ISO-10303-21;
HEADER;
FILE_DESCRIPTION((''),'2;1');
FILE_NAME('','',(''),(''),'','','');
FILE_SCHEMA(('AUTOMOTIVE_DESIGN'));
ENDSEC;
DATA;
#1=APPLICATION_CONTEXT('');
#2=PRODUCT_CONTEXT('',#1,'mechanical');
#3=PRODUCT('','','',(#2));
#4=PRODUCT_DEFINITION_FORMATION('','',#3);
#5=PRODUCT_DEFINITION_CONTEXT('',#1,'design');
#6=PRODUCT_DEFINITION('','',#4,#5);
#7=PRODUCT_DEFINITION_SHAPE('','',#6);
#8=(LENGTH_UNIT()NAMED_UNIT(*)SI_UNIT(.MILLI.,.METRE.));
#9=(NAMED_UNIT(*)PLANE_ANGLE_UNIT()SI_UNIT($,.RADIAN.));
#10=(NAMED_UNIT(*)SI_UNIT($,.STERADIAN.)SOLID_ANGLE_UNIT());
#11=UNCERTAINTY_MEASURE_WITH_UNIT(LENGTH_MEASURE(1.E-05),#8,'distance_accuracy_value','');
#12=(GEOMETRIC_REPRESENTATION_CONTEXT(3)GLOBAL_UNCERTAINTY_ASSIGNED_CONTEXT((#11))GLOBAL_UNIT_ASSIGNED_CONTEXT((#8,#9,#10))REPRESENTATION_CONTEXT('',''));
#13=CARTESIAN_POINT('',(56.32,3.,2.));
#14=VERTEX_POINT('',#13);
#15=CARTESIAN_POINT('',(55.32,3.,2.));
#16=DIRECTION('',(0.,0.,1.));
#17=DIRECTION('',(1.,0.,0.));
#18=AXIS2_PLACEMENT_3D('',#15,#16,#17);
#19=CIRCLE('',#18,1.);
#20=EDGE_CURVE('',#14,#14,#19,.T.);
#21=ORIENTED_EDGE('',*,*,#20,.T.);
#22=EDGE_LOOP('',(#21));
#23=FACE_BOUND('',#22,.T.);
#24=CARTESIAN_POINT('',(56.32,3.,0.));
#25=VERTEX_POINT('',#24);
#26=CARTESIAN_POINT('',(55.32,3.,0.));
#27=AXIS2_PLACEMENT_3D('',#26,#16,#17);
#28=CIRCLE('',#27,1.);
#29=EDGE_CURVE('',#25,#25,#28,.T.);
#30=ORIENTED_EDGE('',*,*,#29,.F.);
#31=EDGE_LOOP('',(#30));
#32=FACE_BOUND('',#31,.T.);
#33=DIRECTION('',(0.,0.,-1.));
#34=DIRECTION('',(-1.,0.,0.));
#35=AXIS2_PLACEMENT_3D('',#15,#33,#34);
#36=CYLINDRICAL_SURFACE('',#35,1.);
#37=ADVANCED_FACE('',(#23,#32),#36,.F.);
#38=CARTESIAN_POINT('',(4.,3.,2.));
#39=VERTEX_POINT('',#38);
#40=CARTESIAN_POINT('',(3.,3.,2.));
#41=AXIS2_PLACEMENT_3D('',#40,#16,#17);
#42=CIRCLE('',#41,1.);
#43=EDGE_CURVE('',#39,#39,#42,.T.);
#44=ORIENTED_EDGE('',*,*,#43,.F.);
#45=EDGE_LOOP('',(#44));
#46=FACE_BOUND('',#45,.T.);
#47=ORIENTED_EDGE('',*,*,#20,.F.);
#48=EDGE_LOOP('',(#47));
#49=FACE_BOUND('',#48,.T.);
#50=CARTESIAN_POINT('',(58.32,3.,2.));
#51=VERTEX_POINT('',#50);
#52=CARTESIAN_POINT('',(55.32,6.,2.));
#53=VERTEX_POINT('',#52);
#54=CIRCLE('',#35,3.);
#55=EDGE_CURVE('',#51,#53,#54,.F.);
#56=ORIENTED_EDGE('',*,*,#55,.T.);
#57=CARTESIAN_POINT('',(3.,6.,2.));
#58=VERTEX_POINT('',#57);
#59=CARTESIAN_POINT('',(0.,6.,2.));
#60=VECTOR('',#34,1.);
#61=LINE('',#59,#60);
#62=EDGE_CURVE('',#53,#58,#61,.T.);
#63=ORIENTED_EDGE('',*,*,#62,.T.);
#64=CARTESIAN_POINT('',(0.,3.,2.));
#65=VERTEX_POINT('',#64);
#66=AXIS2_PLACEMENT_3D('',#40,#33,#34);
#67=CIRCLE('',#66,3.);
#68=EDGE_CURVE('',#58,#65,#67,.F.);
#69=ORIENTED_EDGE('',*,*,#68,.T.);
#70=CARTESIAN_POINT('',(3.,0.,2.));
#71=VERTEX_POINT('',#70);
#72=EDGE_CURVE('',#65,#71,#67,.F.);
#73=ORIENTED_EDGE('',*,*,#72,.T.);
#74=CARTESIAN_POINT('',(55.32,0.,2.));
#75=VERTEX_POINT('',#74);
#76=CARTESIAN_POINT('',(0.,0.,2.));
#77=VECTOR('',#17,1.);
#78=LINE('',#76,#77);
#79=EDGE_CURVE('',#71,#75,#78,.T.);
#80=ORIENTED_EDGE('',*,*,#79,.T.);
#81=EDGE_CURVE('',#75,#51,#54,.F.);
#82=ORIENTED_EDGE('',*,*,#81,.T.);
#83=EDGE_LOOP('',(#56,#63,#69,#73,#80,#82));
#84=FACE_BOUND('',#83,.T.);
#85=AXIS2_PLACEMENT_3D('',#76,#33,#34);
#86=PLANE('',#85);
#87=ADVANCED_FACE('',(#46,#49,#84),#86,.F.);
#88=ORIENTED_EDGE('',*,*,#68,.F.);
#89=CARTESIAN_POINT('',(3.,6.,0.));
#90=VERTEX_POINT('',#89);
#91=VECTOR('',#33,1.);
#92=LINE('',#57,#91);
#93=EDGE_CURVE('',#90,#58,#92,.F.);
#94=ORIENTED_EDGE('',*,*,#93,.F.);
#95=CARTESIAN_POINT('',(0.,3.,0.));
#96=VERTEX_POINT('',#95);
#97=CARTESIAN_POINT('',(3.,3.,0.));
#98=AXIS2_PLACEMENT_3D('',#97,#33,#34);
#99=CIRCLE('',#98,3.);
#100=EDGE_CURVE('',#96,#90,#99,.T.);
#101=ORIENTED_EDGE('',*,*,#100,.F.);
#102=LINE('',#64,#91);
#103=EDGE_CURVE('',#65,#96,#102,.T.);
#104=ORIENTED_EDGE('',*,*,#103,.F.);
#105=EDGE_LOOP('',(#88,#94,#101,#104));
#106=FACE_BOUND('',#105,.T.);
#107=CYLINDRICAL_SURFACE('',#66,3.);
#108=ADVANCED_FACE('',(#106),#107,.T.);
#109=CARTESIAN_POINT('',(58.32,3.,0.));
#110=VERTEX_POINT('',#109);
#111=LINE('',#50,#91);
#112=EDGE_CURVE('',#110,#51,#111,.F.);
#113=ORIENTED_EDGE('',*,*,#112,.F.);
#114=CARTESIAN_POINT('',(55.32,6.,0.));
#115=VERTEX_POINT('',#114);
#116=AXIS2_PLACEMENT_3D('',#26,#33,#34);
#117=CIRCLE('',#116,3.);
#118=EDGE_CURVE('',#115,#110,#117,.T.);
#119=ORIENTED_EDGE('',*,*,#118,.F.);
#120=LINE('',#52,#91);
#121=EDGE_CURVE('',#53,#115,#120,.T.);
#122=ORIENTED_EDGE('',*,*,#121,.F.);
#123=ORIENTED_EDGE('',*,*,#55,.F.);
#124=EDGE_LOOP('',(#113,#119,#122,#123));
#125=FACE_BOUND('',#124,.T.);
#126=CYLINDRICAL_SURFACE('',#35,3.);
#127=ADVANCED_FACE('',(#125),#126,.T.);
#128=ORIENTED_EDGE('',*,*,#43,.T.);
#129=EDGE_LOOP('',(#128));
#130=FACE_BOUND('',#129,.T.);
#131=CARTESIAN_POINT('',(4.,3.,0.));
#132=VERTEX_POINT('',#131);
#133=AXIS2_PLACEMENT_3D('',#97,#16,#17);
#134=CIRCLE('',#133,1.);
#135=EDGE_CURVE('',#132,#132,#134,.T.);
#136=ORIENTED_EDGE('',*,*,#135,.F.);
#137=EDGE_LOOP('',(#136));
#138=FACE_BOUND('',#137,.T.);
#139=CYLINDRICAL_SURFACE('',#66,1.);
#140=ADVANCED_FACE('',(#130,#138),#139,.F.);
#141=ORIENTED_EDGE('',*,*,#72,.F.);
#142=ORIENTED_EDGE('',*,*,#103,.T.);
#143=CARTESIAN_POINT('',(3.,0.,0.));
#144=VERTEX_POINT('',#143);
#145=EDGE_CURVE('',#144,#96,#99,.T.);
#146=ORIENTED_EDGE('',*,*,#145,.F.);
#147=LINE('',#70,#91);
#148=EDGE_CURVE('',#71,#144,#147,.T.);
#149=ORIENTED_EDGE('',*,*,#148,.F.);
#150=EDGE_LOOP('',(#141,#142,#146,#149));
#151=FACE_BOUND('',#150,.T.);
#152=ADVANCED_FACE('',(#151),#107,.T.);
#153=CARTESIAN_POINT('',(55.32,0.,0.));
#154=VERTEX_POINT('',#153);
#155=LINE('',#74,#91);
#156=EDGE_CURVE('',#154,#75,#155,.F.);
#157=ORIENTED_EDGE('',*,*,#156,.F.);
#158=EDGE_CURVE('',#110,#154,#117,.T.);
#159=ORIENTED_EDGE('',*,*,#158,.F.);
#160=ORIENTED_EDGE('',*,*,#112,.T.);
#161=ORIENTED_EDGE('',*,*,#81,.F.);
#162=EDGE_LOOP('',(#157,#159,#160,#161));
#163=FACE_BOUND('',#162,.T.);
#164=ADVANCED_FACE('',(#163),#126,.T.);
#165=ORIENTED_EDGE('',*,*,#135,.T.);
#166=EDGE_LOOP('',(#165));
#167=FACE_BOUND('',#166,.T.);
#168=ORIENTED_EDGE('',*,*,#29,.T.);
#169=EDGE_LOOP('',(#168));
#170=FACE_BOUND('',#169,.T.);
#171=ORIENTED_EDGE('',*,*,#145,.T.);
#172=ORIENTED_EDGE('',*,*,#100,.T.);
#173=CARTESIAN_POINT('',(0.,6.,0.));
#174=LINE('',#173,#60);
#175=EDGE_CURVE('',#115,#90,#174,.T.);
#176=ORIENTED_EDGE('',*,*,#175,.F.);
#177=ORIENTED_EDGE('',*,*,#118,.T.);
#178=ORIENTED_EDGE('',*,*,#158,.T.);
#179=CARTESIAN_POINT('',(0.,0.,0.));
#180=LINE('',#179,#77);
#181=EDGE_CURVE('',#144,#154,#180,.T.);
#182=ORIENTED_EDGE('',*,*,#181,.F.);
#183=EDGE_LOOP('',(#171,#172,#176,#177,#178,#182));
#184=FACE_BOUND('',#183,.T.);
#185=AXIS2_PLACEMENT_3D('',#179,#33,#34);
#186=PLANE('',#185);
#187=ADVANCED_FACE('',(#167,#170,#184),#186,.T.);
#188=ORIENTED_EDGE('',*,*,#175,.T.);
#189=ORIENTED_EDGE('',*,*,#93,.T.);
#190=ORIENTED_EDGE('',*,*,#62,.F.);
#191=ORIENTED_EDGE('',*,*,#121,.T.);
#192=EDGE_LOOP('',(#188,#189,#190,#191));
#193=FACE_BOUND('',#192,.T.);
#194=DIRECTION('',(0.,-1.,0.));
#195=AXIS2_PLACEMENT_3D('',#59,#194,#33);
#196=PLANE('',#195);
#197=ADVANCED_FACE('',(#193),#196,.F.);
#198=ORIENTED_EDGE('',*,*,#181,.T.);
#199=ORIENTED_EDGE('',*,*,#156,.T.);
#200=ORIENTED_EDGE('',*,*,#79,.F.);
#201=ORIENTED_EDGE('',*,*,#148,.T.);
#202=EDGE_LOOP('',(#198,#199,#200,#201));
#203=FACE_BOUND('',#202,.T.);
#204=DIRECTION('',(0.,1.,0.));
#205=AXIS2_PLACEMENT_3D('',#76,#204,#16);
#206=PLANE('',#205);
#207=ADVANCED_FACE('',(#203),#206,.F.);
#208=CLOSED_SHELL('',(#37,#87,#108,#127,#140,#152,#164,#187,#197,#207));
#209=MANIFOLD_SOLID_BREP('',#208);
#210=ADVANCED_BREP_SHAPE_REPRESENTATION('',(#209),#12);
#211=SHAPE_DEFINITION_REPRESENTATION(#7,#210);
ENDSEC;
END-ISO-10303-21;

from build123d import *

# Parameters (mm, degrees)
SKETCH1_W           = 58.32
SKETCH1_H           = 6
SKETCH1_R           = 1
BOSS_EXTRUDE1_DEPTH = 2
FILLET1_R           = 3


with BuildPart() as part:
    # Sketch1 → Boss-Extrude1 (new body)
    with BuildSketch(Plane.XY):
        with Locations((29.16, 3)):
            Rectangle(SKETCH1_W, SKETCH1_H)
        with Locations((3, 3)):
            Circle(SKETCH1_R, mode=Mode.SUBTRACT)
        with Locations((55.32, 3)):
            Circle(SKETCH1_R, mode=Mode.SUBTRACT)
    extrude(amount=BOSS_EXTRUDE1_DEPTH)

    # Fillet1
    fillet1_edges = [part.edges().sort_by_distance(p)[0] for p in [
        (58.32, 0, 1),
        (58.32, 6, 1),
        (0, 0, 1),
        (0, 6, 1),
    ]]
    fillet(fillet1_edges, radius=FILLET1_R - 0.0001)  # a hair under: the kernel refuses the full size


solid = part.part
